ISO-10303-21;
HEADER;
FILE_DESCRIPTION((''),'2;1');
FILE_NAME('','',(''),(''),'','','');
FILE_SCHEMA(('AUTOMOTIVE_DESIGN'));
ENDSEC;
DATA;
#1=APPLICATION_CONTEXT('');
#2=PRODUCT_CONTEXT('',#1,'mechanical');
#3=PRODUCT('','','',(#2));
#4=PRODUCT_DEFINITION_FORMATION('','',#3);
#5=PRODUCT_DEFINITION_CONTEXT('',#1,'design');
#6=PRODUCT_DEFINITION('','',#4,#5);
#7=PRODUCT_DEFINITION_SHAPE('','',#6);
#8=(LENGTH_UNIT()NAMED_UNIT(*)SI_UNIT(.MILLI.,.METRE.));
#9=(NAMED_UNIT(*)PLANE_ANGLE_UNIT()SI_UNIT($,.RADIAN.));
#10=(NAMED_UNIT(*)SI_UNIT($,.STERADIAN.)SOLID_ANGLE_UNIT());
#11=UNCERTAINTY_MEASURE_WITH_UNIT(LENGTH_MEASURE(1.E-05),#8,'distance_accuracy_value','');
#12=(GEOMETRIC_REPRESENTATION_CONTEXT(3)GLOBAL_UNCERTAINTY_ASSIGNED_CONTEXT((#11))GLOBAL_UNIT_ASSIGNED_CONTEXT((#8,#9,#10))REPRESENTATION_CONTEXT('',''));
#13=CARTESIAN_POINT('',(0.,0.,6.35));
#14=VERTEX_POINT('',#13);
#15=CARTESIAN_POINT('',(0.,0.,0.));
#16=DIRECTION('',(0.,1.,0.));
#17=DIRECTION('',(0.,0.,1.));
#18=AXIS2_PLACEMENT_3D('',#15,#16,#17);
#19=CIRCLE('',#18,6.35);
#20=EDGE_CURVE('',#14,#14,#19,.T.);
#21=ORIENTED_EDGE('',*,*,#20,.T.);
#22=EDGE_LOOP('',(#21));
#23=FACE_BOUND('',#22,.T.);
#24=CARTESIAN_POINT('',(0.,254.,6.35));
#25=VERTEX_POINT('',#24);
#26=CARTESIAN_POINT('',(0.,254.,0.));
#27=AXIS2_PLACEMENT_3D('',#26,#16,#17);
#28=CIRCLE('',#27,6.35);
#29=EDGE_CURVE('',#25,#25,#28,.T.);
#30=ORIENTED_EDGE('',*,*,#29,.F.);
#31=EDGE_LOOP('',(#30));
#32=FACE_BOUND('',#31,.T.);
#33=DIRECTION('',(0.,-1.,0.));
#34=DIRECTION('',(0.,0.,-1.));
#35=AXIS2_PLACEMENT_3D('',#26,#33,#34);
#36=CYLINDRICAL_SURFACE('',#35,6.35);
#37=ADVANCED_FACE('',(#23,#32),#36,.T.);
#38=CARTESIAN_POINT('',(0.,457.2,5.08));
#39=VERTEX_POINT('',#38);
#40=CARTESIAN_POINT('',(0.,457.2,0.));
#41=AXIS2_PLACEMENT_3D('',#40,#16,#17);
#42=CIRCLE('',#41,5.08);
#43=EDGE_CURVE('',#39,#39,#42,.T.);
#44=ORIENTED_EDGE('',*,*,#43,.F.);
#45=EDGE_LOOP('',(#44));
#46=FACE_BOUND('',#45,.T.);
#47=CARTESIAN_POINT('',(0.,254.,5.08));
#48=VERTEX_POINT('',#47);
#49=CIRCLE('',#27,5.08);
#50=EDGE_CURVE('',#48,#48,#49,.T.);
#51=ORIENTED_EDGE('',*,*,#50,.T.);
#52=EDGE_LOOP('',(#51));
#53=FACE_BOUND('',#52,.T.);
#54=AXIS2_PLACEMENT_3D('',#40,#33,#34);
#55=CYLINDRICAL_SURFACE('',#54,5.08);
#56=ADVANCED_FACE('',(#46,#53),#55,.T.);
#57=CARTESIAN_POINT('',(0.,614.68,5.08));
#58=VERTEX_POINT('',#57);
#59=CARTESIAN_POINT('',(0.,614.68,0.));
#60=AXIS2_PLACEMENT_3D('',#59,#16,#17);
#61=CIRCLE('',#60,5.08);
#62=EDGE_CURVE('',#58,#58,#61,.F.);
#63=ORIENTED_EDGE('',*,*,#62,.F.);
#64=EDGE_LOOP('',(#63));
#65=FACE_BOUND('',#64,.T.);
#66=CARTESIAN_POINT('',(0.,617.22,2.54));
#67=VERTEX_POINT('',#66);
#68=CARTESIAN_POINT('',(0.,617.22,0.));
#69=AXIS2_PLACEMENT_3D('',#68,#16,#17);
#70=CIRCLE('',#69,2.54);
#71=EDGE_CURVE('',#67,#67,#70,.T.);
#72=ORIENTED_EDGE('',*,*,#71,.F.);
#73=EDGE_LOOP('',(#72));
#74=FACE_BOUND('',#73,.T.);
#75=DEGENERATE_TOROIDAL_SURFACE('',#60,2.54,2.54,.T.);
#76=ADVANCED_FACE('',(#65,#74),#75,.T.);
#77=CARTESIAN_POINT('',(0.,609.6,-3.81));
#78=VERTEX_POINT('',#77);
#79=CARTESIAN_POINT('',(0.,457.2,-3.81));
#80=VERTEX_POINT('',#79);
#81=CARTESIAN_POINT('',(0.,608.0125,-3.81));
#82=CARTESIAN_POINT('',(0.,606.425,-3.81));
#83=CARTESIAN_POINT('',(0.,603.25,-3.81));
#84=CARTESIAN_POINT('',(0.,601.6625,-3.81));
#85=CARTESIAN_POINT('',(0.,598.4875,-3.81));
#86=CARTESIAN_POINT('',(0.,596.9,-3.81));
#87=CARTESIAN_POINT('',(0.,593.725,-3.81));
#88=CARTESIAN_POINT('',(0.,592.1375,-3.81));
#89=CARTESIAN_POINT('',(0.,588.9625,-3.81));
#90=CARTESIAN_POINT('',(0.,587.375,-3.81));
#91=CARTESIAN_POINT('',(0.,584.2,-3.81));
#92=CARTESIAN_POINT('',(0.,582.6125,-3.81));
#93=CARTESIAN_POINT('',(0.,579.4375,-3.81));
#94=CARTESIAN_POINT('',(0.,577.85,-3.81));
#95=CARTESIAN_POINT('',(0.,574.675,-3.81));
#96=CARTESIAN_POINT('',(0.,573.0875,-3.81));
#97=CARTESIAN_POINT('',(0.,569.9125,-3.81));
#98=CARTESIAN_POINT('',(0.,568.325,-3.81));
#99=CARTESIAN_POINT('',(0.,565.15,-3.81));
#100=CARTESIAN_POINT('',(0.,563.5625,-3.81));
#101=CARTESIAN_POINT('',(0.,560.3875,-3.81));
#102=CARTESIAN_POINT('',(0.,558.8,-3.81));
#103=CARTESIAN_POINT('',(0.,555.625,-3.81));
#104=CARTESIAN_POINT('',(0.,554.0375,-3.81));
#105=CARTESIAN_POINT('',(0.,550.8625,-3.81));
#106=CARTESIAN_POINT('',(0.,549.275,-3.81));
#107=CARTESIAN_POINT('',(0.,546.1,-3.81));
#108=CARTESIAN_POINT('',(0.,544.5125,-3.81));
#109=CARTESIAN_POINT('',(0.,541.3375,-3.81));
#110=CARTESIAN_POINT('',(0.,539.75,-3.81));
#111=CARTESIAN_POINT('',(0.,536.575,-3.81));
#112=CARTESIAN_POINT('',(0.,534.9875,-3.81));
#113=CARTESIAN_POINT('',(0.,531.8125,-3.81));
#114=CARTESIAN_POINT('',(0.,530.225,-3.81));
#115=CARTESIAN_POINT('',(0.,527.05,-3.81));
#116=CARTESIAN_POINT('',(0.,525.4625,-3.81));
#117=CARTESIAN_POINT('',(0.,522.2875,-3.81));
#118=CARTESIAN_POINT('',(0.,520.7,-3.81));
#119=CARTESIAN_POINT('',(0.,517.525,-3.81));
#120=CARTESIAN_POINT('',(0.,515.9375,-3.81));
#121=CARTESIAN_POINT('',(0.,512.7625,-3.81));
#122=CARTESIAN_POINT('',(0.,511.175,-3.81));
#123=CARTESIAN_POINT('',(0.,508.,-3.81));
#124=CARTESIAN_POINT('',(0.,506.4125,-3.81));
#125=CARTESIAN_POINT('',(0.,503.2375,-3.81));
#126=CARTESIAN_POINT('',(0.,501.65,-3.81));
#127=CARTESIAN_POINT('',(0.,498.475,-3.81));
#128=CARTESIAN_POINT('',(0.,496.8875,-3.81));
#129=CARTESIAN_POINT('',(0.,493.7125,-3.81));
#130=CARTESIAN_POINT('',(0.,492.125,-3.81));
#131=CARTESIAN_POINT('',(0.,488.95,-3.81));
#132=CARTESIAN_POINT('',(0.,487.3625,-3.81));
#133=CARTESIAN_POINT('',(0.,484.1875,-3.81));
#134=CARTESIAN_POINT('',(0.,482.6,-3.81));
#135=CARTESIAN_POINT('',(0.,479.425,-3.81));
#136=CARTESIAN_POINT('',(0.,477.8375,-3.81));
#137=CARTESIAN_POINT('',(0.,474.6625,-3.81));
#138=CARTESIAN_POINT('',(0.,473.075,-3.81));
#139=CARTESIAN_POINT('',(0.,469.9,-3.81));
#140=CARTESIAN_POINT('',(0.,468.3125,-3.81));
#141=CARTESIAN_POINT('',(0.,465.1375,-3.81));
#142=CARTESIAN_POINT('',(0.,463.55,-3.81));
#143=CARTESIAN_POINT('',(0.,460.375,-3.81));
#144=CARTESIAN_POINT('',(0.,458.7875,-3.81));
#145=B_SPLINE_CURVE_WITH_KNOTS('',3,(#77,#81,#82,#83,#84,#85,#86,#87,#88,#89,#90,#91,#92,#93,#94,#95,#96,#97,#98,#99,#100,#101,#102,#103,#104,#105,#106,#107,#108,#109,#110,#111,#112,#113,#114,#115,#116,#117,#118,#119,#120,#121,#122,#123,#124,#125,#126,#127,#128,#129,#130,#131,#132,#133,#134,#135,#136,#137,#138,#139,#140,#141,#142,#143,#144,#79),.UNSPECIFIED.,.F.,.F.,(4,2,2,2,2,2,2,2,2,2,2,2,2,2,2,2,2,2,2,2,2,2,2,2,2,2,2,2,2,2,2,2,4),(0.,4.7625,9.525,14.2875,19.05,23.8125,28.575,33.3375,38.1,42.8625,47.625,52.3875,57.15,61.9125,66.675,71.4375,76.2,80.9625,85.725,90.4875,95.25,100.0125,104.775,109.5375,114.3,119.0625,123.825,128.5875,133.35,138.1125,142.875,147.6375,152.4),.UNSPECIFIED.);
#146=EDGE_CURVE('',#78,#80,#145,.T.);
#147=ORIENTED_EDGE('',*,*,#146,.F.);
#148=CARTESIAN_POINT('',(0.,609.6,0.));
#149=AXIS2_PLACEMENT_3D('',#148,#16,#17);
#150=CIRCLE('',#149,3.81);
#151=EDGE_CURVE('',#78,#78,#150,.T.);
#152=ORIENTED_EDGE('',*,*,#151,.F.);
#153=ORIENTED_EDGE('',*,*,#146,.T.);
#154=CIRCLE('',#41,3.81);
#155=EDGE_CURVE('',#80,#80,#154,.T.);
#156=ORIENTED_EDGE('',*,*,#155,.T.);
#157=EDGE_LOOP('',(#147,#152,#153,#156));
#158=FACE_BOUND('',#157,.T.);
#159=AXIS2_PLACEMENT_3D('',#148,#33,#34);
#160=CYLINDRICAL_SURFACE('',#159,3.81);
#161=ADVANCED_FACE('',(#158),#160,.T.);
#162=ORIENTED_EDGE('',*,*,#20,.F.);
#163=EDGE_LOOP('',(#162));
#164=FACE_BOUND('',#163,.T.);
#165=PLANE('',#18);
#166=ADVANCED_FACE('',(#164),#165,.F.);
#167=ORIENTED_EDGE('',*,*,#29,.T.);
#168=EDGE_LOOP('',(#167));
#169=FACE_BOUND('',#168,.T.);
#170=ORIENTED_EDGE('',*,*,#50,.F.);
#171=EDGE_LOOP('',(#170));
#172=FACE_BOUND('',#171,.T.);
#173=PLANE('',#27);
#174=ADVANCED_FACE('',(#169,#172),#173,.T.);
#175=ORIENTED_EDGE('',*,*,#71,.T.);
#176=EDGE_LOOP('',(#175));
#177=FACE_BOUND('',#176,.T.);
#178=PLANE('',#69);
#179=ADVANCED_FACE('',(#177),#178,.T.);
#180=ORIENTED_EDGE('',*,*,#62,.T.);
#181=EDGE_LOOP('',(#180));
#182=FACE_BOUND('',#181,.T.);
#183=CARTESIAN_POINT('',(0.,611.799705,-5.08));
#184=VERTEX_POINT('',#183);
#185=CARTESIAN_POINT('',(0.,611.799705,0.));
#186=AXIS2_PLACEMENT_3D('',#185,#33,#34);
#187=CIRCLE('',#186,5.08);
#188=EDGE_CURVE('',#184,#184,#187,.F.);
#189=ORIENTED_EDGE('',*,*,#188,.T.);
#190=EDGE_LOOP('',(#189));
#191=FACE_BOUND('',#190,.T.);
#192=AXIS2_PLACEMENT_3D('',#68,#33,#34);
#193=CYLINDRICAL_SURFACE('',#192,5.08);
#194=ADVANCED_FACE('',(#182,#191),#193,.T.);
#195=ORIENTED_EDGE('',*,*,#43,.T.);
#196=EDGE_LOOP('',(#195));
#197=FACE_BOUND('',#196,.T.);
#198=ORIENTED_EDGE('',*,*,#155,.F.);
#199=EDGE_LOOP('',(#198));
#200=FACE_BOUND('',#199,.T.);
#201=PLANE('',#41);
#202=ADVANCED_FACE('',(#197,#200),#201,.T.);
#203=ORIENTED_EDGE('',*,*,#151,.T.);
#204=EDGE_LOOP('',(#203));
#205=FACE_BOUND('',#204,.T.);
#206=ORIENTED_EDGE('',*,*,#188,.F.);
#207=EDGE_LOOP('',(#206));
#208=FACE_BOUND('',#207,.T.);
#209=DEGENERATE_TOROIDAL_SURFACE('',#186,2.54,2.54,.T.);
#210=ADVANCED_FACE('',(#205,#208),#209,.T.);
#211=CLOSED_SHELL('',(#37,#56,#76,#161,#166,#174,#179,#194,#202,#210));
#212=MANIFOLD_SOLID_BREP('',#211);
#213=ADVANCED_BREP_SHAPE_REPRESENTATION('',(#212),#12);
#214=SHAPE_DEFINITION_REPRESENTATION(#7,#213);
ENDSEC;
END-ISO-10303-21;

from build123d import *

# Parameters (mm, degrees)
SKETCH1_R           = 6.35
BOSS_EXTRUDE1_DEPTH = 254
SKETCH2_R           = 5.08
BOSS_EXTRUDE2_DEPTH = 203.2
SKETCH3_R           = 3.81
BOSS_EXTRUDE3_DEPTH = 152.4
SKETCH4_R           = 5.08
BOSS_EXTRUDE4_DEPTH = 7.62
FILLET1_R           = 2.54


with BuildPart() as part:
    # Sketch1 → Boss-Extrude1 (new body)
    with BuildSketch(Plane(origin=(0, 0, 0), x_dir=(1, 0, 0), z_dir=(0, 1, 0))):
        with Locations(Location((0, 0, 0), (0, 0, 270))):
            Circle(SKETCH1_R)
    extrude(amount=BOSS_EXTRUDE1_DEPTH)

    # Sketch2 → Boss-Extrude2 (add)
    with BuildSketch(Plane(origin=(0, 254, 0), x_dir=(1, 0, 0), z_dir=(0, 1, 0))):
        with Locations(Location((0, 0, 0), (0, 0, 270))):
            Circle(SKETCH2_R)
    extrude(amount=BOSS_EXTRUDE2_DEPTH)

    # Sketch3 → Boss-Extrude3 (add)
    with BuildSketch(Plane(origin=(0, 457.2, 0), x_dir=(1, 0, 0), z_dir=(0, 1, 0))):
        with Locations(Location((0, 0, 0), (0, 0, 90))):
            Circle(SKETCH3_R)
    extrude(amount=BOSS_EXTRUDE3_DEPTH)

    # Sketch4 → Boss-Extrude4 (add)
    with BuildSketch(Plane(origin=(0, 609.6, 0), x_dir=(1, 0, 0), z_dir=(0, 1, 0))):
        with Locations(Location((0, 0, 0), (0, 0, 270))):
            Circle(SKETCH4_R)
    extrude(amount=BOSS_EXTRUDE4_DEPTH)

    # Fillet1
    # the kernel refuses this fillet: 2.54 mm, written as the material it takes off along each edge
    with BuildSketch(Plane(origin=(0, 609.6, 0), x_dir=(0, 0, 1), z_dir=(-1, 0, 0))) as fillet1_piece_1:
        with BuildLine():
            CenterArc((2.54, 2.199704526), FILLET1_R, 300, 60)
            Line((3.81, 0), (3.8354, -0.043994091))
            ThreePointArc((3.8354, -0.043994091), (4.445, -0.0508), (5.08, -0.0508))
            Line((5.08, -0.0508), (5.1308, 0))
            Line((5.1308, 0), (5.1308, 2.199704526))
            Line((5.1308, 2.199704526), (5.08, 2.199704526))
        make_face()
    revolve(axis=Axis((0, 609.6, 0), (0, 1, 0)), mode=Mode.SUBTRACT)
    with BuildSketch(Plane(origin=(0, 617.22, 0), x_dir=(0, 0, 1), z_dir=(-1, 0, 0))) as fillet1_piece_2:
        with BuildLine():
            CenterArc((5.08 - FILLET1_R, -FILLET1_R), FILLET1_R, 0, 90)
            Line((5.08 - FILLET1_R, 0), (5.08 - FILLET1_R, FILLET1_R * 0.02))
            Line((5.08 - FILLET1_R, FILLET1_R * 0.02), (5.08 + FILLET1_R * 0.02, FILLET1_R * 0.02))
            Line((5.08 + FILLET1_R * 0.02, FILLET1_R * 0.02), (5.08 + FILLET1_R * 0.02, -FILLET1_R))
            Line((5.08 + FILLET1_R * 0.02, -FILLET1_R), (5.08, -FILLET1_R))
        make_face()
    revolve(axis=Axis((0, 617.22, 0), (0, 1, 0)), mode=Mode.SUBTRACT)


solid = part.part
